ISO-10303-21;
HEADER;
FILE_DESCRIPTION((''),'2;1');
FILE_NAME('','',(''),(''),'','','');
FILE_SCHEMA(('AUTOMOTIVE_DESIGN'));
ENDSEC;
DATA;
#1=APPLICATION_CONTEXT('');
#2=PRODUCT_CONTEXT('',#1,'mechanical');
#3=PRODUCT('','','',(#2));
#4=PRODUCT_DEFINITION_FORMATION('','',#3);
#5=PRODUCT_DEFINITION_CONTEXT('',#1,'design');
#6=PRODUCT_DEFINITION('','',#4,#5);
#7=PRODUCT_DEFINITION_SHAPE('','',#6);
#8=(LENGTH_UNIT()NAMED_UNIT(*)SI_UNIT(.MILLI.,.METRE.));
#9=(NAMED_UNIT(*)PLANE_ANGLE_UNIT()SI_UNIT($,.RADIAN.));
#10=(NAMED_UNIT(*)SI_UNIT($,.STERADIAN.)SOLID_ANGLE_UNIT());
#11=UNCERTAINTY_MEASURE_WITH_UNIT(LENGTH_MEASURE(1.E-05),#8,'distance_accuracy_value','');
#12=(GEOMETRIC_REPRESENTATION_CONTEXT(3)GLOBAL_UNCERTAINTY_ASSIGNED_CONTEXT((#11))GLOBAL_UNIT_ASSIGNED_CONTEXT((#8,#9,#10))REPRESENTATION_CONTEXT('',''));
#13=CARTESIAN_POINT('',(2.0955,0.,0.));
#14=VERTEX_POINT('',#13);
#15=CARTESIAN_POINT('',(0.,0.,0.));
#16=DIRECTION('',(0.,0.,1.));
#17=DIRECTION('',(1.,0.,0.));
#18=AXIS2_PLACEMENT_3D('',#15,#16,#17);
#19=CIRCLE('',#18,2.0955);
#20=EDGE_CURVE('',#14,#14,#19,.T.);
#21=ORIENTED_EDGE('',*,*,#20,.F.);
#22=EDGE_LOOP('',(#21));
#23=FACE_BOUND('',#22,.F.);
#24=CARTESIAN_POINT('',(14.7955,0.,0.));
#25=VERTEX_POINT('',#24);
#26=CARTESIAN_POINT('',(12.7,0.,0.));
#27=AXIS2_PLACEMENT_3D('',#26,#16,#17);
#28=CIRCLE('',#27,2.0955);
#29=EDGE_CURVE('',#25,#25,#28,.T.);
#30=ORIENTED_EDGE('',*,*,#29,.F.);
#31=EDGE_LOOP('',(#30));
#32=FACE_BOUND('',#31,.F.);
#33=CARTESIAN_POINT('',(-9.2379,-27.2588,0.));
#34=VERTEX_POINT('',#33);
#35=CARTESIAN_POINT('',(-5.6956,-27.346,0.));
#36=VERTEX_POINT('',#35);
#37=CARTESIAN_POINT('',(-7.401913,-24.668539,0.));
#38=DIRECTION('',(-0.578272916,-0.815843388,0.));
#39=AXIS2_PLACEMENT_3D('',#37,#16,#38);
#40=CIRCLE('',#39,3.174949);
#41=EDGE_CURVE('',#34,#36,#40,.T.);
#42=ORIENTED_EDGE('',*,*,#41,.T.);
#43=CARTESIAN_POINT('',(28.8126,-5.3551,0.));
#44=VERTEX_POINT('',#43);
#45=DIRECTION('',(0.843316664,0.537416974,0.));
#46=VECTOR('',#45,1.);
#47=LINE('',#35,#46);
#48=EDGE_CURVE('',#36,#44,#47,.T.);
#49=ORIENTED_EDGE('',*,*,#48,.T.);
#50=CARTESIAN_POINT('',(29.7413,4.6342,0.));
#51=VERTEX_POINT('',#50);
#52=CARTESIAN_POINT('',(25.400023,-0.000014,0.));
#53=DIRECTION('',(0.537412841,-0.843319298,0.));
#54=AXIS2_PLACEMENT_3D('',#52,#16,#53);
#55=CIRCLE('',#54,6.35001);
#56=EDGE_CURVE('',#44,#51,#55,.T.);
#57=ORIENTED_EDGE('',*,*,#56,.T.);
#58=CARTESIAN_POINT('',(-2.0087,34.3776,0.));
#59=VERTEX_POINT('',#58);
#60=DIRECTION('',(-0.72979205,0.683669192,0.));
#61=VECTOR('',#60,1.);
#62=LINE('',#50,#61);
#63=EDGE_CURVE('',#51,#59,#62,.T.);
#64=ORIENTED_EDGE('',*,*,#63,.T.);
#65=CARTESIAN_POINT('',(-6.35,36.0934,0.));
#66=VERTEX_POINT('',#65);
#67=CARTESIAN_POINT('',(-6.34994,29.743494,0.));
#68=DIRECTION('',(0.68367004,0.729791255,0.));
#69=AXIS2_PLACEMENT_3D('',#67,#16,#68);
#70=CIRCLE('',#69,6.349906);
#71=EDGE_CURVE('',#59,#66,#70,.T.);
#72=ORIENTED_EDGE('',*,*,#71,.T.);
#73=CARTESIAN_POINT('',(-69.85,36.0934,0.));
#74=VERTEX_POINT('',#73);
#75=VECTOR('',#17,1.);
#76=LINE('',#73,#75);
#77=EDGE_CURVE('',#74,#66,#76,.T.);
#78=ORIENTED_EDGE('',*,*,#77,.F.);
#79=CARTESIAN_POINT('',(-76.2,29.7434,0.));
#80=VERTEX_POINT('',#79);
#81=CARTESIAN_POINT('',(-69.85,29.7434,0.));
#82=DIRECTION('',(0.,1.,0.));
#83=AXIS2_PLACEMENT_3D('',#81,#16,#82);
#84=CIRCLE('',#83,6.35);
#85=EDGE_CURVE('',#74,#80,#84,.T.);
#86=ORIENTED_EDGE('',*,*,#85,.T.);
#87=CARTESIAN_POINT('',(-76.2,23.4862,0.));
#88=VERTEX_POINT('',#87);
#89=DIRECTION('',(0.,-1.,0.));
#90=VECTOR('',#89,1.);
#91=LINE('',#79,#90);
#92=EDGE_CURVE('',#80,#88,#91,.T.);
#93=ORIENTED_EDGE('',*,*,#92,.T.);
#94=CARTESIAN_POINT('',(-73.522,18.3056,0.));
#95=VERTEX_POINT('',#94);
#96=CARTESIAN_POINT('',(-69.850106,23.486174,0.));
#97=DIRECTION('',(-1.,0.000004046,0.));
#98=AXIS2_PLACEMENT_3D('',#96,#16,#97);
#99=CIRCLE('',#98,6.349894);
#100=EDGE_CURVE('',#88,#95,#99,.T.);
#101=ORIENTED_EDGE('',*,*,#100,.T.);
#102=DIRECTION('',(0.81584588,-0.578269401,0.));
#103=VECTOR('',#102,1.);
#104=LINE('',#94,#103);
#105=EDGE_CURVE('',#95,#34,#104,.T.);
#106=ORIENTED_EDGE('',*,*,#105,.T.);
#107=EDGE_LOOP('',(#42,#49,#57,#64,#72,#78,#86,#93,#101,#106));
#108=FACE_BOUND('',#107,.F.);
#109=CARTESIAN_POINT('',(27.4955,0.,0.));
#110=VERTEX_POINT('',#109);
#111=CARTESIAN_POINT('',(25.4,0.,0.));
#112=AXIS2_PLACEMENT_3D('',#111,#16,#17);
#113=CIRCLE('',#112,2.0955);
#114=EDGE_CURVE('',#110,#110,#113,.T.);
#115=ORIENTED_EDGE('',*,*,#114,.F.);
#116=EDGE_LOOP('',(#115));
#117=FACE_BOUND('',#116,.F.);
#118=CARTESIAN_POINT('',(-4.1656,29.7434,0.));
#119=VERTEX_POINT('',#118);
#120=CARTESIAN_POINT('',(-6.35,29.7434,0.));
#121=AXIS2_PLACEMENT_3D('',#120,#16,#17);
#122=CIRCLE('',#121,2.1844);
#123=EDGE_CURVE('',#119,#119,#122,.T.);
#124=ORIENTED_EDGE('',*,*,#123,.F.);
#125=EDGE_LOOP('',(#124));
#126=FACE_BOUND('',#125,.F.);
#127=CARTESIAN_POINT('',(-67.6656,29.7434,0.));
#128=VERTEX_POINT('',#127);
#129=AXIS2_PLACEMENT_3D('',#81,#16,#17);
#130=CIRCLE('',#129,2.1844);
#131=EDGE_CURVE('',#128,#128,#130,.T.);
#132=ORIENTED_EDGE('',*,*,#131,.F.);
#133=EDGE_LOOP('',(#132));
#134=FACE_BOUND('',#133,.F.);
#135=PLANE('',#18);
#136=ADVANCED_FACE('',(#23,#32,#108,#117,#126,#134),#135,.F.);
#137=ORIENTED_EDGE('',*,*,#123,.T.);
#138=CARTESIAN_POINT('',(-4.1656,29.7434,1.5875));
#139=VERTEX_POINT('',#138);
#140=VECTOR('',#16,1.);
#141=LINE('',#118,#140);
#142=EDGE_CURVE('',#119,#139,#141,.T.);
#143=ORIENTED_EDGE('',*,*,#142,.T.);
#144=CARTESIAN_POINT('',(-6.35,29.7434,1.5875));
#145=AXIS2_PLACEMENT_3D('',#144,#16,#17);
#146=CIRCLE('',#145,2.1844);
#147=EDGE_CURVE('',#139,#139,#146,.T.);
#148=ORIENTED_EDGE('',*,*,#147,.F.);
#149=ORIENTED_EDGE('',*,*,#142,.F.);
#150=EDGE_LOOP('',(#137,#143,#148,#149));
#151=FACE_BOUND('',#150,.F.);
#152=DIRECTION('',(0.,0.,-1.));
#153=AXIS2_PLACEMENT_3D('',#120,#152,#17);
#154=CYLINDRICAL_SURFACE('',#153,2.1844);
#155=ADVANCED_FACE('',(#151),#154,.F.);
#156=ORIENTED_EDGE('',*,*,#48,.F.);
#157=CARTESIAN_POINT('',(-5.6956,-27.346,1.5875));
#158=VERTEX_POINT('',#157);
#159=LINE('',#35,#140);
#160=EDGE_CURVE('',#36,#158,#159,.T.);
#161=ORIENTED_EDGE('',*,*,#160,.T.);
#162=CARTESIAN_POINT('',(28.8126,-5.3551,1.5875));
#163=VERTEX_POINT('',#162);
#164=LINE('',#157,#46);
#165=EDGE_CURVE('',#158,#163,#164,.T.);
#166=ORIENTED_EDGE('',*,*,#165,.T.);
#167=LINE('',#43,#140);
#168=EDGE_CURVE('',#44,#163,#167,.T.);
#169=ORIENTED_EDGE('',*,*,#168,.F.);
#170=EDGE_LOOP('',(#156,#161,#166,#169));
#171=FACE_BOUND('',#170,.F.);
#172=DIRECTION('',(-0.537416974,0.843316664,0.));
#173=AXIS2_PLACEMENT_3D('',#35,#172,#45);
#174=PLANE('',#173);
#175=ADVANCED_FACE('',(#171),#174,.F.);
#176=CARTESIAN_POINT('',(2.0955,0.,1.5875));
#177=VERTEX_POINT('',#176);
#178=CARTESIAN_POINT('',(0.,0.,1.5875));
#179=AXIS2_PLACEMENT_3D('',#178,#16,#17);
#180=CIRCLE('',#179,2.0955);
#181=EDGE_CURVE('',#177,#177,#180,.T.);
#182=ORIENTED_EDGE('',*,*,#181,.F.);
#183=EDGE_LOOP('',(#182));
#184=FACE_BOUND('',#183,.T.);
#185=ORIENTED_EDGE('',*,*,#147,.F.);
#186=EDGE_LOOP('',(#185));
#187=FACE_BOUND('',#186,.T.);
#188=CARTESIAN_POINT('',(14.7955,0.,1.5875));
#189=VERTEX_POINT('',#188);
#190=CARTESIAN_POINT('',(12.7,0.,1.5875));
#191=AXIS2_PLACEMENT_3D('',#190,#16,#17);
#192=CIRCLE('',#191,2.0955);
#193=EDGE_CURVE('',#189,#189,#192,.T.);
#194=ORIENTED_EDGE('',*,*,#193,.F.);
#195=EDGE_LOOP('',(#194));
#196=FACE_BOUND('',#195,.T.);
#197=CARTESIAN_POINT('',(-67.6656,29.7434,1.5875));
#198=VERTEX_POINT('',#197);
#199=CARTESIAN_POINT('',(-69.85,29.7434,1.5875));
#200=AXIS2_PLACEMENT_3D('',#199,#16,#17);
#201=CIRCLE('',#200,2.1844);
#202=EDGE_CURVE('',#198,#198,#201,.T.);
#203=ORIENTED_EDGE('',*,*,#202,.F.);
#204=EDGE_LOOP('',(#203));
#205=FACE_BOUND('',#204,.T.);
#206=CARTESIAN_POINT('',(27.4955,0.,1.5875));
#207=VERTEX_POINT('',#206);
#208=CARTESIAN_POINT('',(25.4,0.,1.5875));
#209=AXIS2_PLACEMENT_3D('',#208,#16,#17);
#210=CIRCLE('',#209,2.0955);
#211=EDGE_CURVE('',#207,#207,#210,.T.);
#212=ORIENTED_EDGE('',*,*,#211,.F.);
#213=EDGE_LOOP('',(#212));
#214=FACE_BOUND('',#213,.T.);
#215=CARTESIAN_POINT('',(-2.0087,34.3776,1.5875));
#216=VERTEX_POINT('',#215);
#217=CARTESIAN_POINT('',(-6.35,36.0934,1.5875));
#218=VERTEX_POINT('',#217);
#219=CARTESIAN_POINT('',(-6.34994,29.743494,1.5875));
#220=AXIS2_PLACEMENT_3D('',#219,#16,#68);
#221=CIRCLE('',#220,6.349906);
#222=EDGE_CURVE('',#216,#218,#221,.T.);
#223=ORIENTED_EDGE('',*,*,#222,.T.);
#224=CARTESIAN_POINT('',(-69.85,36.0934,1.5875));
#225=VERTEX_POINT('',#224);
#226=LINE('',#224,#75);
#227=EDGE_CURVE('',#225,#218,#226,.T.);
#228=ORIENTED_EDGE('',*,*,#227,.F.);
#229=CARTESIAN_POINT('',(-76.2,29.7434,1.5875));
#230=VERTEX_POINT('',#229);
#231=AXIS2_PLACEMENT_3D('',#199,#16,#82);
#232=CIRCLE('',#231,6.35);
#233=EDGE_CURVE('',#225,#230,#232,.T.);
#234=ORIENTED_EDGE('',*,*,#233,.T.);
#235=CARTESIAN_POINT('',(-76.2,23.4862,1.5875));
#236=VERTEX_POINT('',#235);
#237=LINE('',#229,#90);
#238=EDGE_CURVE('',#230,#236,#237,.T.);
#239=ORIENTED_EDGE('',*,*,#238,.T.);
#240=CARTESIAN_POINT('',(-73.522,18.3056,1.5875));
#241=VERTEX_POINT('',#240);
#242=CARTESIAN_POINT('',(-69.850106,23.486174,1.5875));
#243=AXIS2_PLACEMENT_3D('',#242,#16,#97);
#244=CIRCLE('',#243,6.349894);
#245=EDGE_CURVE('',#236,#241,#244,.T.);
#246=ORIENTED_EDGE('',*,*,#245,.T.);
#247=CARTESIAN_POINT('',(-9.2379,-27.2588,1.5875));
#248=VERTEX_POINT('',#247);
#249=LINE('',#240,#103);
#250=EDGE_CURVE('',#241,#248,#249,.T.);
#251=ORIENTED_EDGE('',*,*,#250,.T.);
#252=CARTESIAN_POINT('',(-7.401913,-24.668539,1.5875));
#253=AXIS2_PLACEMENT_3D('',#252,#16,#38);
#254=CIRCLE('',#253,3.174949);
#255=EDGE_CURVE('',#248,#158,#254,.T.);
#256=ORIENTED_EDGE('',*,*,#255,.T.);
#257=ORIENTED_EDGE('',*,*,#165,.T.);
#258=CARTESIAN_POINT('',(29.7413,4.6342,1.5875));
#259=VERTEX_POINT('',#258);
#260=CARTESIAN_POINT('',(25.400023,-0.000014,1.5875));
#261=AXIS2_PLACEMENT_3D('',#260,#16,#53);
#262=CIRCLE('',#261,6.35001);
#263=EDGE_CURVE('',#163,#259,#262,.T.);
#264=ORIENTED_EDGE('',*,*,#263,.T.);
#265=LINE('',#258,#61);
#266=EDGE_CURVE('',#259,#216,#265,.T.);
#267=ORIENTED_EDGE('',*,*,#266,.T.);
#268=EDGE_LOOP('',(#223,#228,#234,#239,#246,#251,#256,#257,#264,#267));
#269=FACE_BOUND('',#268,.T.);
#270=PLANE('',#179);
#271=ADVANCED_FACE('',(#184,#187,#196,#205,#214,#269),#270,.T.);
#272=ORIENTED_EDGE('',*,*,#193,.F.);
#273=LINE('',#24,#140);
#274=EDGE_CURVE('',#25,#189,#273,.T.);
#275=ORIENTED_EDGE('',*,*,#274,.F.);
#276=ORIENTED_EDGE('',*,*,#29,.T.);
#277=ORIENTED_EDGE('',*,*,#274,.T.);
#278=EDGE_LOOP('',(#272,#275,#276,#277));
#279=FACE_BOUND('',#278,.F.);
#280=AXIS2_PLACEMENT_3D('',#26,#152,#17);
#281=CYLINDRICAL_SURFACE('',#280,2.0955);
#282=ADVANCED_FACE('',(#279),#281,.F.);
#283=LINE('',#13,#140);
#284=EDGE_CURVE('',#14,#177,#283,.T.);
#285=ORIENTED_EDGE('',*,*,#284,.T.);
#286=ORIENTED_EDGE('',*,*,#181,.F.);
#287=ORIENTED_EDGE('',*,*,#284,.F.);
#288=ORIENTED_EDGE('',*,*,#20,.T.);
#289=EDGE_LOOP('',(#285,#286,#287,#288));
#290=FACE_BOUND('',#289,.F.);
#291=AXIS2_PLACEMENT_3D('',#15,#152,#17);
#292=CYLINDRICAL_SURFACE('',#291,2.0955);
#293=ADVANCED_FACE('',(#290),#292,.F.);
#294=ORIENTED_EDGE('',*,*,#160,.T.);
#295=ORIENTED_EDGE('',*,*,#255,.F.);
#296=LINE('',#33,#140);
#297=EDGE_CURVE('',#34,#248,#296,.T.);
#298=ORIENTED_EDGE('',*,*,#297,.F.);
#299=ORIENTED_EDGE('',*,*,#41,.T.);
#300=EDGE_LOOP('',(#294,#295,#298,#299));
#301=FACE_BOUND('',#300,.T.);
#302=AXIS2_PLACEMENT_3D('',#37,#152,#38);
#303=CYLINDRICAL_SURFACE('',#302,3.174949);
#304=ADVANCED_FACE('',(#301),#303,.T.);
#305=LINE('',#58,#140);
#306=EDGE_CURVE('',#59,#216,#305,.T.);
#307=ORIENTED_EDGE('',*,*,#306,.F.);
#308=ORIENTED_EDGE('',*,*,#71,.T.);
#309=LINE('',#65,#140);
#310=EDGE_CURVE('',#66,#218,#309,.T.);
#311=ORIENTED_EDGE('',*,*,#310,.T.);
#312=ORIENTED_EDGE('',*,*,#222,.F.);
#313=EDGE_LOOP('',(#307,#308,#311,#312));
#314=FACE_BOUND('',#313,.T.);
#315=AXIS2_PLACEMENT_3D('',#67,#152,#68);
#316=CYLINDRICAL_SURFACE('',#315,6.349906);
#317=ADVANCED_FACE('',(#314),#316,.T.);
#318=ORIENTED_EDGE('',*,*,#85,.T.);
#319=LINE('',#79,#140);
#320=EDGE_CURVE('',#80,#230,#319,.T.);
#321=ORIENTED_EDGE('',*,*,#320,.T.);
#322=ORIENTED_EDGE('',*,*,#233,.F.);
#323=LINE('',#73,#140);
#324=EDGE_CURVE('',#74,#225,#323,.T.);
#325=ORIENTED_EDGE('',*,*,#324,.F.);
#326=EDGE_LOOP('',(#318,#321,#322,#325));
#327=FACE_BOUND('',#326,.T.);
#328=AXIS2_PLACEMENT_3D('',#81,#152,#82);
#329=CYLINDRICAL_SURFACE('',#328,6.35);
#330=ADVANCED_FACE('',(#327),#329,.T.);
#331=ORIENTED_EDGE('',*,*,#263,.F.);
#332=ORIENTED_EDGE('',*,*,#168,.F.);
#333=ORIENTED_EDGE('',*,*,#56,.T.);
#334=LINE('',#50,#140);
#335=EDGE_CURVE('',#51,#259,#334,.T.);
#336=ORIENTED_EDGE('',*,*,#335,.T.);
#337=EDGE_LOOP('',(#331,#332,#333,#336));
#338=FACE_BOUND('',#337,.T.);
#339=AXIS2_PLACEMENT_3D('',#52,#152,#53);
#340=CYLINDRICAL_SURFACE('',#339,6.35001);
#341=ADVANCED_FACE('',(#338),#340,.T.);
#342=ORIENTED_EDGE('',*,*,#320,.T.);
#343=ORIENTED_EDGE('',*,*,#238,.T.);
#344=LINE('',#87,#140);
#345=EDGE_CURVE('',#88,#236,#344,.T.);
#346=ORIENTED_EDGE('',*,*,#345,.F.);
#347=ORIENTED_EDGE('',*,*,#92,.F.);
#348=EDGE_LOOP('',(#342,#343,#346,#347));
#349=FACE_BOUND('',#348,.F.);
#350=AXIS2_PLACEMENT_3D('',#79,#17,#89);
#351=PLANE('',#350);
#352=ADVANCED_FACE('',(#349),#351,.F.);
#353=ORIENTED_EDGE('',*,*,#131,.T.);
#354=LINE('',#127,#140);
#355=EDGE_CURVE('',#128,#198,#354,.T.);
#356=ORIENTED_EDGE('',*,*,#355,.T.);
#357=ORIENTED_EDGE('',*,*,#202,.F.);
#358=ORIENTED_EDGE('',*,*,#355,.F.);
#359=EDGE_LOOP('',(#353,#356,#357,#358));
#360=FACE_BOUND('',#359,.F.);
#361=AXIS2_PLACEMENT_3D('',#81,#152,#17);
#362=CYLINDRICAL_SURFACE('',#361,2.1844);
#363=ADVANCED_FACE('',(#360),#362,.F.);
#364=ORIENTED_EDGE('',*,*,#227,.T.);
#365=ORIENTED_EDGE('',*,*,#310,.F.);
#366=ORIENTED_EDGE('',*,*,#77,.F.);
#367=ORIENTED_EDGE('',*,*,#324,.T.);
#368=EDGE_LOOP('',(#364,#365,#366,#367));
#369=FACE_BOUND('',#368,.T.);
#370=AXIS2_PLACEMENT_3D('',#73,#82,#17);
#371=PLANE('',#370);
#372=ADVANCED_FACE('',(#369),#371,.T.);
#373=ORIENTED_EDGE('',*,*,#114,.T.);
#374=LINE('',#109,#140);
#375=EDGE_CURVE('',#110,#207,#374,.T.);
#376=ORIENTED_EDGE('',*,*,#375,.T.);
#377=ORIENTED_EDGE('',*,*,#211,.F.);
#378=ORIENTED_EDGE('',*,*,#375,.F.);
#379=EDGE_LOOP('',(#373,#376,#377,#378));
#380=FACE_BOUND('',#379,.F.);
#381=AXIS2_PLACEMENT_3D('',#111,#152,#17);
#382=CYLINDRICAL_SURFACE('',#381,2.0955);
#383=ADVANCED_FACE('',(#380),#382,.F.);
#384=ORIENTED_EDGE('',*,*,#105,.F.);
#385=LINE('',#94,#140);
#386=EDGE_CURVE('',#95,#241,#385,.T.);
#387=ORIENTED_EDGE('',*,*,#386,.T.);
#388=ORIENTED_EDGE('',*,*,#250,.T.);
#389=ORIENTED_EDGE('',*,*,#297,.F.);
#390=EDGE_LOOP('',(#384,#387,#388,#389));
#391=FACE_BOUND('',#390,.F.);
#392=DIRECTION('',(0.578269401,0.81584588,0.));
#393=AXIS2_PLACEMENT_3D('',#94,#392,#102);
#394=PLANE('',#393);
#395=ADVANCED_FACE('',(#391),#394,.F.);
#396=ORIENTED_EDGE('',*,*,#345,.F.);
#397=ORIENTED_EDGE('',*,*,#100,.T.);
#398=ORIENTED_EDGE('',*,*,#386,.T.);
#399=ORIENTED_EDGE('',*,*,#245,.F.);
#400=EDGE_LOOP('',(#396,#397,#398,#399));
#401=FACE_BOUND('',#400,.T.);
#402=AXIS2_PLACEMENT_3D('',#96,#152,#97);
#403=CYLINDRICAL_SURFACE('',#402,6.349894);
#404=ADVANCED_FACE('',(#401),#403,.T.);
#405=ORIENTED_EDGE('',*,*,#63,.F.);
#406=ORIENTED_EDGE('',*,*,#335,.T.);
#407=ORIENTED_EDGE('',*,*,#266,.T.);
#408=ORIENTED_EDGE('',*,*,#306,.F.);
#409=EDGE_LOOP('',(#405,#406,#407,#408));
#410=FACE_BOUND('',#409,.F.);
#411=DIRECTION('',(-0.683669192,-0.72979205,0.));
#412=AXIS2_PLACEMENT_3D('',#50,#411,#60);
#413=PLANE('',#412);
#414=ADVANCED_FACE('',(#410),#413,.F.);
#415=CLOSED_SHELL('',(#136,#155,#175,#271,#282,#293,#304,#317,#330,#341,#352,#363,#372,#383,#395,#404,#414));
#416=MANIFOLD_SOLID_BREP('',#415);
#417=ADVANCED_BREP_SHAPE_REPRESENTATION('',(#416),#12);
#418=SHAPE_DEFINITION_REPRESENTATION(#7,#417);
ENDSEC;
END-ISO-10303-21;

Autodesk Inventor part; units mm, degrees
ref_plane "YZ Plane" through (0, 0, 0) normal (1, 0, 0) x (0, 1, 0)
ref_plane "XZ Plane" through (0, 0, 0) normal (0, 1, 0) x (-1, 0, 0)
ref_plane "XY Plane" through (0, 0, 0) normal (0, 0, 1) x (1, 0, 0)
sketch "main" plane through (0, 0, 0) normal (0, 0, 1) x (1, 0, 0)
  line L0 (10.9249, 53.4086) -> (-34.6395, -10.8755)
  line L1 (28.7127, 49.7366) -> (28.7127, -13.7634)
  arc A0 (16.1055, 56.0866) -> (10.9249, 53.4086) centre (16.1055, 49.7366) ccw
  line L2 (22.3627, 56.0866) -> (16.1055, 56.0866)
  arc A1 (28.7127, 49.7366) -> (22.3627, 56.0866) centre (22.3627, 49.7366) ccw
  arc A2 (26.9969, -18.1047) -> (28.7127, -13.7634) centre (22.3627, -13.7634) ccw
  arc A3 (-34.6395, -10.8755) -> (-34.7267, -14.4179) centre (-32.0492, -12.7116) ccw
  line L3 (-2.7465, -49.8547) -> (26.9969, -18.1047)
  circle A4 centre (-7.3807, -45.5134) radius 2.0955
  arc A5 (-12.7358, -48.926) -> (-2.7465, -49.8547) centre (-7.3807, -45.5134) ccw
  line L4 (-34.7267, -14.4179) -> (-12.7358, -48.926)
  circle A6 centre (-7.3807, -20.1134) radius 2.0955
  circle A7 centre (22.3627, 49.7366) radius 2.1844
  circle A8 centre (22.3627, -13.7634) radius 2.1844
  circle A9 centre (-7.3807, -32.8134) radius 2.0955
  point P0 (3.7494, 2.3687)
  point P1 (14.8443, 56.0866)
  dimension "d0" = 6.35
  dimension "d1" = 4.191
  dimension "d2" = 12.7
  dimension "d3" = 3.175
  dimension "d4" = 4.3688
  dimension "d5" = 4.3688
  dimension "d6" = 4.191
  dimension "d7" = 4.191
sketch "Sketch1" plane through (0, 0, 0) normal (0, 0, 1) x (1, 0, 0)
  line L0 (-73.522, 18.3056) -> (-9.2379, -27.2588)
  line L1 (-69.85, 36.0934) -> (-6.35, 36.0934)
  arc A0 (-76.2, 23.4862) -> (-73.522, 18.3056) centre (-69.85, 23.4862) ccw
  line L2 (-76.2, 29.7434) -> (-76.2, 23.4862)
  arc A1 (-69.85, 36.0934) -> (-76.2, 29.7434) centre (-69.85, 29.7434) ccw
  arc A2 (-2.0087, 34.3776) -> (-6.35, 36.0934) centre (-6.35, 29.7434) ccw
  arc A3 (-9.2379, -27.2588) -> (-5.6956, -27.346) centre (-7.4019, -24.6685) ccw
  line L3 (29.7413, 4.6342) -> (-2.0087, 34.3776)
  circle A4 centre (25.4, 0) radius 2.0955
  arc A5 (28.8126, -5.3551) -> (29.7413, 4.6342) centre (25.4, 0) ccw
  line L4 (-5.6956, -27.346) -> (28.8126, -5.3551)
  circle A6 centre (0, 0) radius 2.0955
  circle A7 centre (-69.85, 29.7434) radius 2.1844
  circle A8 centre (-6.35, 29.7434) radius 2.1844
  circle A9 centre (12.7, 0) radius 2.0955
extrude "Extrusion1" add sketch "Sketch1" along normal blind 1.5875
properties part number "sled" material "Acetal Resin, White"
